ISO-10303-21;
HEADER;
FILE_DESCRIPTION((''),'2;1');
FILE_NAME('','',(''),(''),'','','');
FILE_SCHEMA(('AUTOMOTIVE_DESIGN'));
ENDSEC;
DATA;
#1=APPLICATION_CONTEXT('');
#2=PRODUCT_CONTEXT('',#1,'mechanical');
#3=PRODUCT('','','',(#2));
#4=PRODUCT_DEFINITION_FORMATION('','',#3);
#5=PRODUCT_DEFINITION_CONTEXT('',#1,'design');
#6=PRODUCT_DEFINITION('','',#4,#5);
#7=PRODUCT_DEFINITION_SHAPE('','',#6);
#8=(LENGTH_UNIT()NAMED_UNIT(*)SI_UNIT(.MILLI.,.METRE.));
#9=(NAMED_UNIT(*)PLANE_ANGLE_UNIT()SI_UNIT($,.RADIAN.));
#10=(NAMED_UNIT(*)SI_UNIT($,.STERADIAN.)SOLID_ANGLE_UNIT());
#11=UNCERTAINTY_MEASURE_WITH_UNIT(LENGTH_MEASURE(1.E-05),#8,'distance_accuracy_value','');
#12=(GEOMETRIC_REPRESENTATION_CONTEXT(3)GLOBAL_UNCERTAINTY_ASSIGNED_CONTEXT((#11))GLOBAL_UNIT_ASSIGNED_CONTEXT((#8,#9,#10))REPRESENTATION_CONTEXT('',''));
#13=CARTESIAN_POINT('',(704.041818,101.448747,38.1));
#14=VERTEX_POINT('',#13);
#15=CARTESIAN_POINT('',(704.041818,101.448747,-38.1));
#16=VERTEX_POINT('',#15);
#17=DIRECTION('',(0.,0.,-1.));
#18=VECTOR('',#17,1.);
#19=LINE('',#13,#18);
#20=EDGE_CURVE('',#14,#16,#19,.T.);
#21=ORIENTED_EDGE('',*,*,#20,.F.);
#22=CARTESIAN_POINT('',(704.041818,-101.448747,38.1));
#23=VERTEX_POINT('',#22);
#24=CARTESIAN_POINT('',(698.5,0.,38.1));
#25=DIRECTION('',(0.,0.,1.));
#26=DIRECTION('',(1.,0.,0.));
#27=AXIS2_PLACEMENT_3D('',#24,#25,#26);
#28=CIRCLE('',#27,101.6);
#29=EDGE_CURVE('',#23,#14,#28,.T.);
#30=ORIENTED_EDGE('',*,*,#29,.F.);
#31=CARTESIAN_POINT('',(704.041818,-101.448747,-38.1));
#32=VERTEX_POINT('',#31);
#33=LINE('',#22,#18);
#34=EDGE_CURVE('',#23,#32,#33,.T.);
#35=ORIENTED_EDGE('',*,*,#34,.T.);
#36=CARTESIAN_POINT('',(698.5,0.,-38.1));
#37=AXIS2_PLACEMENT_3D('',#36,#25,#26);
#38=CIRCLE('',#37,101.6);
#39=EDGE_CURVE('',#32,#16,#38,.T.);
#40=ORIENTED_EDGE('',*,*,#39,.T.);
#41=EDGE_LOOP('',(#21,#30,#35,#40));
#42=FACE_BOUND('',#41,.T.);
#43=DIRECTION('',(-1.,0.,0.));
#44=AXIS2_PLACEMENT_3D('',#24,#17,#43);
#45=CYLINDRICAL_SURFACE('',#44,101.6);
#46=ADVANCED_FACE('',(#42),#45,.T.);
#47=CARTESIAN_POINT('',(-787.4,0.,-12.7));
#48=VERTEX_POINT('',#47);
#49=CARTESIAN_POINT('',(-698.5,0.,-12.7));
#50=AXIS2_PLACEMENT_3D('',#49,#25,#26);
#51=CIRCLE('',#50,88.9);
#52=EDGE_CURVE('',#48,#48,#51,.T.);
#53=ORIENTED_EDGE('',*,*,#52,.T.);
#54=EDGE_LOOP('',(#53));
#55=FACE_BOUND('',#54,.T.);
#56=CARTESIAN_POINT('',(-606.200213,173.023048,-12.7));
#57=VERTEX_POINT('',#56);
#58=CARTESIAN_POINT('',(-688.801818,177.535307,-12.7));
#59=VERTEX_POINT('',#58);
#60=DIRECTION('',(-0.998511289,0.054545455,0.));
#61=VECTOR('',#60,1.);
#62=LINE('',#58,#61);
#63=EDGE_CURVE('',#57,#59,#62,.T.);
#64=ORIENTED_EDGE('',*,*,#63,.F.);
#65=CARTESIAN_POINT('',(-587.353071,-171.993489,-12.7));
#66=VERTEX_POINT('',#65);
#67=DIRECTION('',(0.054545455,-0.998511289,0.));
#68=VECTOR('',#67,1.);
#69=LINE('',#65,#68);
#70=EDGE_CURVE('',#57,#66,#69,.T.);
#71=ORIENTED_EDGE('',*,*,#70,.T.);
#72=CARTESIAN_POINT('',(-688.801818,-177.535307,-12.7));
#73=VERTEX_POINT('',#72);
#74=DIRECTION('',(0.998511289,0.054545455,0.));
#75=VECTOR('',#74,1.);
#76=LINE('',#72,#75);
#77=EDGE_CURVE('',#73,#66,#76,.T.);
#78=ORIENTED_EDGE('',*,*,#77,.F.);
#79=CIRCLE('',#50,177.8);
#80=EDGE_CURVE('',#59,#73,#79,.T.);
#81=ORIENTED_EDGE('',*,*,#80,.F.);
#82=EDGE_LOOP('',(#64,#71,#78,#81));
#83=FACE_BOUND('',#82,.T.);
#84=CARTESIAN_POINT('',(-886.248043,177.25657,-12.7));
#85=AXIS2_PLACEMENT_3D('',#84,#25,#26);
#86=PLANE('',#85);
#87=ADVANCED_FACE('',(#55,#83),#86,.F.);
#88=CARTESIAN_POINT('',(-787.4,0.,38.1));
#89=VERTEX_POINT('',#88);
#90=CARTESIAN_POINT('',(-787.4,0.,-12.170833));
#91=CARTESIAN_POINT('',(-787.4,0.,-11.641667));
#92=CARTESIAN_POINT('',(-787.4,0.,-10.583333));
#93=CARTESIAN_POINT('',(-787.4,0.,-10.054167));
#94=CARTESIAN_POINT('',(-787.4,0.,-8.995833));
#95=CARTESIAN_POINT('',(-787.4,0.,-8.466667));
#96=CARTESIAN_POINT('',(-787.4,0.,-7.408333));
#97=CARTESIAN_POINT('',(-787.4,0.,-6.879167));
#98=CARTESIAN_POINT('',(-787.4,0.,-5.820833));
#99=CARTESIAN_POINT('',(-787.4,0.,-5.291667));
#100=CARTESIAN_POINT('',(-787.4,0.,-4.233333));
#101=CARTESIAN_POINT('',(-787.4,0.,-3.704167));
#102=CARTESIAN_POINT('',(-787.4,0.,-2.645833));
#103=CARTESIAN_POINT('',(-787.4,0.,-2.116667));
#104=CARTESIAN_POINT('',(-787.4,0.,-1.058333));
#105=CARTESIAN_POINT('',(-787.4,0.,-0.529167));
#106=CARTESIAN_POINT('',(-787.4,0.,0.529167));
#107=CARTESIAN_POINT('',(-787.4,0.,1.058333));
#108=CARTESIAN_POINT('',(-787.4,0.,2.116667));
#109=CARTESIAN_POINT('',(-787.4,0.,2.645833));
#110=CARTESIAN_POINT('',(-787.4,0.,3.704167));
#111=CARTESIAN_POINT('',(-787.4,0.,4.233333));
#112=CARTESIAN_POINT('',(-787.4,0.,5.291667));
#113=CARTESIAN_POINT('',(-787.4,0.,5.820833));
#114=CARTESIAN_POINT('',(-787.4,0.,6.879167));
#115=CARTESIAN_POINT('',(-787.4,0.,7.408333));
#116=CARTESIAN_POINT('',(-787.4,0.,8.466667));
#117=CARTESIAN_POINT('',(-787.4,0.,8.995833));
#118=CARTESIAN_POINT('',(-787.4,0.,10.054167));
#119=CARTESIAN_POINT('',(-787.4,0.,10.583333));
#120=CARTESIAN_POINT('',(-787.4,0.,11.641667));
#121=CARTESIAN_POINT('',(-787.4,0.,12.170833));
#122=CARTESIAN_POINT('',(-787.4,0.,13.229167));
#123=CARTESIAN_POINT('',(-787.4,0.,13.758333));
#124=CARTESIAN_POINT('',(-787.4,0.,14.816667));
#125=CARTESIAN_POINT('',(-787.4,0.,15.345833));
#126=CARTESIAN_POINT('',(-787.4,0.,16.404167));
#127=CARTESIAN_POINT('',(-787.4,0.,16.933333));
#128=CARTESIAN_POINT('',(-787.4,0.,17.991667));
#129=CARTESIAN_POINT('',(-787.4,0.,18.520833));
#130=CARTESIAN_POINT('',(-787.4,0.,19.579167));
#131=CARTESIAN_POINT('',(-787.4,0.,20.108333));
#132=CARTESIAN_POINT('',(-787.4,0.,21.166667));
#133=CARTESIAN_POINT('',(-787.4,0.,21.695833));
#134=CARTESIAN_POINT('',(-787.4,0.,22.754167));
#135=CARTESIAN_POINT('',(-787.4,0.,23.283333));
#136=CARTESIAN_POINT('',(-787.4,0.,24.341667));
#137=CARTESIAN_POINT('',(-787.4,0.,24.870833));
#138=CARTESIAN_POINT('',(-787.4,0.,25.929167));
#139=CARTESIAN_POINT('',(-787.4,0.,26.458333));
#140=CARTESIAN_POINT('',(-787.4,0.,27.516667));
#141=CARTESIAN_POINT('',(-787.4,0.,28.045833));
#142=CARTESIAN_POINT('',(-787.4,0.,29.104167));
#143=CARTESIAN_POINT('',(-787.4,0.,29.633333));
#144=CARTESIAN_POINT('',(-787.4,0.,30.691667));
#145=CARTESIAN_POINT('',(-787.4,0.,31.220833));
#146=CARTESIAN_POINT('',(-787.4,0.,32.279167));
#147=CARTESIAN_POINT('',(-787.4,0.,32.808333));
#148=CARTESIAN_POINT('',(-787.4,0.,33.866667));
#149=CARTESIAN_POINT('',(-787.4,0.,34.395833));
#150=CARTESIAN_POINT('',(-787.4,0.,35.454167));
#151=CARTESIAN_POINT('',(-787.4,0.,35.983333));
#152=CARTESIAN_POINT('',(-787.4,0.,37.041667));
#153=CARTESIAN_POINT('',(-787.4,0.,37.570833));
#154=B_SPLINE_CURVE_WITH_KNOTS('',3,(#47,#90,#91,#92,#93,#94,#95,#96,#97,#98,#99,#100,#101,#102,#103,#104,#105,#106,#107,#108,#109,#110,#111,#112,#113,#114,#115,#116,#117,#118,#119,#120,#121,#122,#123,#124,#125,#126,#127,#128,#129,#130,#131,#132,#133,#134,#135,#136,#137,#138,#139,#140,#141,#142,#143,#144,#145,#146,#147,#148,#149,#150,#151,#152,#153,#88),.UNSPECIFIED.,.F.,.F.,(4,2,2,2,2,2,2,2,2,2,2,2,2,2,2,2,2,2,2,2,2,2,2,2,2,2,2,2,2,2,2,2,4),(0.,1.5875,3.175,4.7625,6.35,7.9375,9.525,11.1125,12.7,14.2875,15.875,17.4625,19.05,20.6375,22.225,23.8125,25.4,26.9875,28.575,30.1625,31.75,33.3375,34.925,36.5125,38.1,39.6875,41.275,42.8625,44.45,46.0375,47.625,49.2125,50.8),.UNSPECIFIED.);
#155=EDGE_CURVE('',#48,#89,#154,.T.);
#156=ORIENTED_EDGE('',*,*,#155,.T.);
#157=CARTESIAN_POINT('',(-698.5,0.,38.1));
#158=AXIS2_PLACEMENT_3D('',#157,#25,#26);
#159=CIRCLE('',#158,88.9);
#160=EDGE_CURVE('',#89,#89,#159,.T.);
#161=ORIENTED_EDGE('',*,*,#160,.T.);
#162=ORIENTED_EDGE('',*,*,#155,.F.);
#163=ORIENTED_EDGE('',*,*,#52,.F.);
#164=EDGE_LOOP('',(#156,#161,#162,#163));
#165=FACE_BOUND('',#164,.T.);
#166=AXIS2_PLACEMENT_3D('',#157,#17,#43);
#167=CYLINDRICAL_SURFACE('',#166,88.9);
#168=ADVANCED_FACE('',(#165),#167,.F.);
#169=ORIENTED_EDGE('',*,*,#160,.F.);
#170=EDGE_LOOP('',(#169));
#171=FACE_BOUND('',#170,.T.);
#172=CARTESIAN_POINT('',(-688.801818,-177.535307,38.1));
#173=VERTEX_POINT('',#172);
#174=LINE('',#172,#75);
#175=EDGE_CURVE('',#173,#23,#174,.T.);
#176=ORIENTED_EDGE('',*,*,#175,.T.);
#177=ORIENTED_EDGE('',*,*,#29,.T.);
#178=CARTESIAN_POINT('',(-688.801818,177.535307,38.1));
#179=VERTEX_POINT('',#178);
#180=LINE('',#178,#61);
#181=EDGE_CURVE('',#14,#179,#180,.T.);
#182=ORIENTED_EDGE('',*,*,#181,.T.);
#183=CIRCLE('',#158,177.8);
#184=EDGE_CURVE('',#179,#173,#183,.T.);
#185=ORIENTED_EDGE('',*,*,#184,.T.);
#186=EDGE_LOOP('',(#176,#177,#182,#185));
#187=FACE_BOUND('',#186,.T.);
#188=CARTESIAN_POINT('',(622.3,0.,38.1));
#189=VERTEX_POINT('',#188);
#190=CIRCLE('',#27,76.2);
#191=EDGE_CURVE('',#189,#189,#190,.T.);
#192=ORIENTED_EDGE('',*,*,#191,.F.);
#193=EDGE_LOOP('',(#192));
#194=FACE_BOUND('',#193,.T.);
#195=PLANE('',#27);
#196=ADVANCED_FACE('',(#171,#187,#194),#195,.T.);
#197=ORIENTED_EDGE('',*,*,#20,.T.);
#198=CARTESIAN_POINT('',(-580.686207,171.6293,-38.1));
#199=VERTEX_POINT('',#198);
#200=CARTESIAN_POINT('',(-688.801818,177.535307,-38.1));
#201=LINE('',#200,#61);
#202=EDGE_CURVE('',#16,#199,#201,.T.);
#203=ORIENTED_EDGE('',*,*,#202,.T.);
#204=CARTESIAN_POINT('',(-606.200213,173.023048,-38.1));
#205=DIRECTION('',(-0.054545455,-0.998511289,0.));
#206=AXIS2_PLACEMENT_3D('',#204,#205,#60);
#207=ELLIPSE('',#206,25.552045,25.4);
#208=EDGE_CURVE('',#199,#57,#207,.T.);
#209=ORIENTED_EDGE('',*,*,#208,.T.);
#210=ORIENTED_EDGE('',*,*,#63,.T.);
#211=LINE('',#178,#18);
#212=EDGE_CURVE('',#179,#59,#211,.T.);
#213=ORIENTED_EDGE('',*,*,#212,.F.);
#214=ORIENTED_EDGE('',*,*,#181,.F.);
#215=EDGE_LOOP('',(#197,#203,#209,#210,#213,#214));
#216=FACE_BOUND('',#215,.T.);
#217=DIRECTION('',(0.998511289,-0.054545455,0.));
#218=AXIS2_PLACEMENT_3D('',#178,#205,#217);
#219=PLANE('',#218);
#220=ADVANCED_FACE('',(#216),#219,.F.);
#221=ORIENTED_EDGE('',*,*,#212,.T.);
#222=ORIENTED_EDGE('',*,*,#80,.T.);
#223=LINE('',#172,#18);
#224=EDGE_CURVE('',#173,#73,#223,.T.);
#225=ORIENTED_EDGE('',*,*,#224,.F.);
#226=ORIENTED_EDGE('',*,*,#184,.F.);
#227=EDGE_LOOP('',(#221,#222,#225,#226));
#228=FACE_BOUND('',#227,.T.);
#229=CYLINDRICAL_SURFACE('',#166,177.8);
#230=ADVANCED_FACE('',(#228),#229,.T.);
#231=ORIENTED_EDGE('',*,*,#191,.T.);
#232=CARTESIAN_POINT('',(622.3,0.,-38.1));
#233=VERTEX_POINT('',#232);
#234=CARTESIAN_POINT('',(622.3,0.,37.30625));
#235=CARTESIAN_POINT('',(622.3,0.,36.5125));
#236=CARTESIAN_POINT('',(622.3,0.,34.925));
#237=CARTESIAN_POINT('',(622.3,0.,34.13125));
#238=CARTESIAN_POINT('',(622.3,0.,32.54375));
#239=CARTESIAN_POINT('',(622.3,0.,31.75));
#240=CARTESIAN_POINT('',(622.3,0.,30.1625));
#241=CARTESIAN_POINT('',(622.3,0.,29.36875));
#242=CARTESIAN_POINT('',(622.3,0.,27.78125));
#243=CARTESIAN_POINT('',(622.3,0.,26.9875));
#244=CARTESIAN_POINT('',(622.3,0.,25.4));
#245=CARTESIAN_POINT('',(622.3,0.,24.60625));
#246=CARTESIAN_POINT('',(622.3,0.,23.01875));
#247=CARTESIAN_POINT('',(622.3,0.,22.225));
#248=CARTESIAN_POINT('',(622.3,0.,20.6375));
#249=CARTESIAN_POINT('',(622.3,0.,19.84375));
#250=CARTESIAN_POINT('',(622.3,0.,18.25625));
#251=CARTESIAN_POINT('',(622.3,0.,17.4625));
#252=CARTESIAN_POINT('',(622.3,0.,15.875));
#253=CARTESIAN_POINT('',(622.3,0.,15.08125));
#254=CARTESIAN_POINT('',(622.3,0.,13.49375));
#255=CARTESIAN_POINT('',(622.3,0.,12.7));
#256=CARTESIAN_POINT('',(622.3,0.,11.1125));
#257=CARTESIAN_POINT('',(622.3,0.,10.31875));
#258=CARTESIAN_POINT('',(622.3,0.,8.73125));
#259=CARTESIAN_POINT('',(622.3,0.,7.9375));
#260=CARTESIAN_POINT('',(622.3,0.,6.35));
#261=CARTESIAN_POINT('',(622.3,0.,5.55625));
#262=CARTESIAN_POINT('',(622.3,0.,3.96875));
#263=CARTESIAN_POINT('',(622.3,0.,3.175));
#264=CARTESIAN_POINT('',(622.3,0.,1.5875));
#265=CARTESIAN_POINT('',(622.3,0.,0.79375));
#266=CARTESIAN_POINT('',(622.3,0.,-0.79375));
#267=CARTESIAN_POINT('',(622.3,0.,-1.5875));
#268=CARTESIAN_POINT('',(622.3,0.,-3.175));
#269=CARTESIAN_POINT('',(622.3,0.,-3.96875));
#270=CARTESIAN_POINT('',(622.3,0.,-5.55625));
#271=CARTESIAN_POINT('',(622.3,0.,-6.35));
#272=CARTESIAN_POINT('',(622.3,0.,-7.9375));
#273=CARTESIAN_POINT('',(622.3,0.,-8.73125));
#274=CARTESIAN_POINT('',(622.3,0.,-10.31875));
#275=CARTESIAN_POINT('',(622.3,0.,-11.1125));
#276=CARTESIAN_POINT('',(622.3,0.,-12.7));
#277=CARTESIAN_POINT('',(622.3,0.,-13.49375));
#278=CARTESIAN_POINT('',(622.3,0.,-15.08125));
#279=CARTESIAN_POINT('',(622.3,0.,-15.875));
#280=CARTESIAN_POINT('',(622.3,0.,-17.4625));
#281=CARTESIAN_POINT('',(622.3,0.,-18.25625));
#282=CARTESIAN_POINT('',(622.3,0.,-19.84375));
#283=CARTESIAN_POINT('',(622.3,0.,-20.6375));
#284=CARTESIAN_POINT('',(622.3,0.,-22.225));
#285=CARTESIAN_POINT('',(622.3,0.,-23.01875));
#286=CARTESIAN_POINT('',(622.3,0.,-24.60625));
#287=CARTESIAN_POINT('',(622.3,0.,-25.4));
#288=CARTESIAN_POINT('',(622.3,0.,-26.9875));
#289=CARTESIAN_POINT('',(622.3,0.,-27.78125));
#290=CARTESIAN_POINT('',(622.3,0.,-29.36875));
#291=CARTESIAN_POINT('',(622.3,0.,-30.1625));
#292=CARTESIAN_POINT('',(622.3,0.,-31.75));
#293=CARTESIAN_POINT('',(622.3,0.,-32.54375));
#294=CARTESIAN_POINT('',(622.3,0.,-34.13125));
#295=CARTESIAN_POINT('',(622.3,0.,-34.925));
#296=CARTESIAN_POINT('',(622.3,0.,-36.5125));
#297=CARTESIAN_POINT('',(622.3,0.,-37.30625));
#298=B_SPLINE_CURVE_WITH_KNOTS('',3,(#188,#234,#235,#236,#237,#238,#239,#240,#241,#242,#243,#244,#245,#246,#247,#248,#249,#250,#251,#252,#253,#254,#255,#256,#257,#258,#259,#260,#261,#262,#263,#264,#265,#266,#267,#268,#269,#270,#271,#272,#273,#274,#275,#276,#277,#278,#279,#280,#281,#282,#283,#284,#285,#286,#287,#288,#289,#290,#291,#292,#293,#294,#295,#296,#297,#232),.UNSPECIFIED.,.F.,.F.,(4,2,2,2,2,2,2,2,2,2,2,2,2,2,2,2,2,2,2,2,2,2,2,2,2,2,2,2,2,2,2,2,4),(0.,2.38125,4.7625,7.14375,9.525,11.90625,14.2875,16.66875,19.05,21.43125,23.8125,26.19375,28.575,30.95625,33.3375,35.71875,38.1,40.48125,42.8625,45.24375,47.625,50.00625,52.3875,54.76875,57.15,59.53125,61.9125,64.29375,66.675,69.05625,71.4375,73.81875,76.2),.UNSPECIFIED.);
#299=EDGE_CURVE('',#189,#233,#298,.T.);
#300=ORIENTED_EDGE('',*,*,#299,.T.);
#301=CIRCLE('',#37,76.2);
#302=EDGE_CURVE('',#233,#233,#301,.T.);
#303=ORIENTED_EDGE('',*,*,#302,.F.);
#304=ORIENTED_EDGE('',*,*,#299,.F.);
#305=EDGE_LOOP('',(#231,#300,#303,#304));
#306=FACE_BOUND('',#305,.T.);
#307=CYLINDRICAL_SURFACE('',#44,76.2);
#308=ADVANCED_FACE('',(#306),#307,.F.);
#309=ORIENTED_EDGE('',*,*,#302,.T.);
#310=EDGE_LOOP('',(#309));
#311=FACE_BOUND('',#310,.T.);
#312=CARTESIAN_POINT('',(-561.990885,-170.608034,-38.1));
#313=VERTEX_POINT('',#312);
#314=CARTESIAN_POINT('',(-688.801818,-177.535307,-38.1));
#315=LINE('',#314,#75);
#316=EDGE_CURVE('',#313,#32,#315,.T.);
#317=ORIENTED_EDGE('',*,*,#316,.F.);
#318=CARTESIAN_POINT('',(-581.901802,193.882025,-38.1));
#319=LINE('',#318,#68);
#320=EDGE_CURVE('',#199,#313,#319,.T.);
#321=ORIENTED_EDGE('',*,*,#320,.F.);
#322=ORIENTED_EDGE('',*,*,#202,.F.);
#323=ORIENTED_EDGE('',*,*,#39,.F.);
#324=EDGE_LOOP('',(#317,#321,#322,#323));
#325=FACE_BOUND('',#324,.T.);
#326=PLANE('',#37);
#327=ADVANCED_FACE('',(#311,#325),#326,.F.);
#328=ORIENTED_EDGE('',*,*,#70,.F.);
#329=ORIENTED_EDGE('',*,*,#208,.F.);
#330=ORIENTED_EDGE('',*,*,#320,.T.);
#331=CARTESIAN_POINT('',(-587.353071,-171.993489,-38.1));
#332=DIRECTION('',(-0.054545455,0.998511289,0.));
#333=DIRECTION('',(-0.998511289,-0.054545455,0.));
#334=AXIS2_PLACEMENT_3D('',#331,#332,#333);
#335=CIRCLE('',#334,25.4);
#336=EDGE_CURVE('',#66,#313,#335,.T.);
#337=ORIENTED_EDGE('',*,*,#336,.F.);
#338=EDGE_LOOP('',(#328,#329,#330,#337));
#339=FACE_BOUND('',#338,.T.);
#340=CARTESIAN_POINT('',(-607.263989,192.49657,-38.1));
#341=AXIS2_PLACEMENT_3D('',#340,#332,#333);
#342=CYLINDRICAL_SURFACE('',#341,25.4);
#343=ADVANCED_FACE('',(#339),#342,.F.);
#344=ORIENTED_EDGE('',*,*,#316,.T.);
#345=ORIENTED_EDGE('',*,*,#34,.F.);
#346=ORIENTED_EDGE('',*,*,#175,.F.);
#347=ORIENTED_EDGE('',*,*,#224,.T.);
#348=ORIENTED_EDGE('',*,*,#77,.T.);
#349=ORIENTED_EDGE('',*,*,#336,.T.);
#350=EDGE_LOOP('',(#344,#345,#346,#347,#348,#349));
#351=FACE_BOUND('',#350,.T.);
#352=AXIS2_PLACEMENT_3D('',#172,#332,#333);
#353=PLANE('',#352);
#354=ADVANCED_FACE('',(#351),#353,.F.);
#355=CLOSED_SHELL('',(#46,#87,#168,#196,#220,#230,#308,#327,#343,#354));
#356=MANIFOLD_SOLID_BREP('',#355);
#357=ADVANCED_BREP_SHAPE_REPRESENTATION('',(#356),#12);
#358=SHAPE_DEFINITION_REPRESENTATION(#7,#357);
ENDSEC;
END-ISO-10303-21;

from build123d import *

# Parameters (mm, degrees)
SKETCH1_R               = 88.9
SKETCH1_R_2             = 76.2
BOSS_EXTRUDE1_DEPTH     = 38.1
CUT_EXTRUDE1_DEPTH      = 940.915106169
CUT_EXTRUDE1_DEPTH_BACK = 940.915106169
SKETCH2_W               = 304.8
SKETCH2_H               = 25.4
FILLET1_R               = 25.4


with BuildPart() as part:
    # Sketch1 → Boss-Extrude1 (new, symmetric)
    with BuildSketch(Plane.XY):
        with BuildLine():
            Line((-688.801818182, 177.535307107), (704.041818182, 101.448746918))
            ThreePointArc((704.041818182, 101.448746918), (800.1, 0), (704.041818182, -101.448746918))
            Line((704.041818182, -101.448746918), (-688.801818182, -177.535307107))
            ThreePointArc((-688.801818182, -177.535307107), (-876.3, 0), (-688.801818182, 177.535307107))
        make_face()
        with Locations(Location((-698.5, 0, 0), (0, 0, 180))):
            Circle(SKETCH1_R, mode=Mode.SUBTRACT)
        with Locations(Location((698.5, 0, 0), (0, 0, 180))):
            Circle(SKETCH1_R_2, mode=Mode.SUBTRACT)
    extrude(amount=BOSS_EXTRUDE1_DEPTH, both=True)

    # Sketch2 → Cut-Extrude1 (cut, two sides: drawn at the far end of the back side and taken through both)
    with BuildSketch(Plane(origin=(7.62, -139.492027012, 0), x_dir=(0.998511288563344, 0.054545454545454695, 0), z_dir=(0.054545454545454695, -0.998511288563344, 0)).offset(-CUT_EXTRUDE1_DEPTH_BACK)):
        with Locations((-722.860135061, -25.4)):
            Rectangle(SKETCH2_W, SKETCH2_H)
    extrude(amount=CUT_EXTRUDE1_DEPTH + CUT_EXTRUDE1_DEPTH_BACK, mode=Mode.SUBTRACT)

    # Fillet1
    fillet1_edges = [part.edges().sort_by_distance(p)[0] for p in [
        (-571.338545978, 0.510632627, -12.7),
    ]]
    fillet(fillet1_edges, radius=FILLET1_R - 0.0001)  # a hair under: the kernel refuses the full size


solid = part.part
